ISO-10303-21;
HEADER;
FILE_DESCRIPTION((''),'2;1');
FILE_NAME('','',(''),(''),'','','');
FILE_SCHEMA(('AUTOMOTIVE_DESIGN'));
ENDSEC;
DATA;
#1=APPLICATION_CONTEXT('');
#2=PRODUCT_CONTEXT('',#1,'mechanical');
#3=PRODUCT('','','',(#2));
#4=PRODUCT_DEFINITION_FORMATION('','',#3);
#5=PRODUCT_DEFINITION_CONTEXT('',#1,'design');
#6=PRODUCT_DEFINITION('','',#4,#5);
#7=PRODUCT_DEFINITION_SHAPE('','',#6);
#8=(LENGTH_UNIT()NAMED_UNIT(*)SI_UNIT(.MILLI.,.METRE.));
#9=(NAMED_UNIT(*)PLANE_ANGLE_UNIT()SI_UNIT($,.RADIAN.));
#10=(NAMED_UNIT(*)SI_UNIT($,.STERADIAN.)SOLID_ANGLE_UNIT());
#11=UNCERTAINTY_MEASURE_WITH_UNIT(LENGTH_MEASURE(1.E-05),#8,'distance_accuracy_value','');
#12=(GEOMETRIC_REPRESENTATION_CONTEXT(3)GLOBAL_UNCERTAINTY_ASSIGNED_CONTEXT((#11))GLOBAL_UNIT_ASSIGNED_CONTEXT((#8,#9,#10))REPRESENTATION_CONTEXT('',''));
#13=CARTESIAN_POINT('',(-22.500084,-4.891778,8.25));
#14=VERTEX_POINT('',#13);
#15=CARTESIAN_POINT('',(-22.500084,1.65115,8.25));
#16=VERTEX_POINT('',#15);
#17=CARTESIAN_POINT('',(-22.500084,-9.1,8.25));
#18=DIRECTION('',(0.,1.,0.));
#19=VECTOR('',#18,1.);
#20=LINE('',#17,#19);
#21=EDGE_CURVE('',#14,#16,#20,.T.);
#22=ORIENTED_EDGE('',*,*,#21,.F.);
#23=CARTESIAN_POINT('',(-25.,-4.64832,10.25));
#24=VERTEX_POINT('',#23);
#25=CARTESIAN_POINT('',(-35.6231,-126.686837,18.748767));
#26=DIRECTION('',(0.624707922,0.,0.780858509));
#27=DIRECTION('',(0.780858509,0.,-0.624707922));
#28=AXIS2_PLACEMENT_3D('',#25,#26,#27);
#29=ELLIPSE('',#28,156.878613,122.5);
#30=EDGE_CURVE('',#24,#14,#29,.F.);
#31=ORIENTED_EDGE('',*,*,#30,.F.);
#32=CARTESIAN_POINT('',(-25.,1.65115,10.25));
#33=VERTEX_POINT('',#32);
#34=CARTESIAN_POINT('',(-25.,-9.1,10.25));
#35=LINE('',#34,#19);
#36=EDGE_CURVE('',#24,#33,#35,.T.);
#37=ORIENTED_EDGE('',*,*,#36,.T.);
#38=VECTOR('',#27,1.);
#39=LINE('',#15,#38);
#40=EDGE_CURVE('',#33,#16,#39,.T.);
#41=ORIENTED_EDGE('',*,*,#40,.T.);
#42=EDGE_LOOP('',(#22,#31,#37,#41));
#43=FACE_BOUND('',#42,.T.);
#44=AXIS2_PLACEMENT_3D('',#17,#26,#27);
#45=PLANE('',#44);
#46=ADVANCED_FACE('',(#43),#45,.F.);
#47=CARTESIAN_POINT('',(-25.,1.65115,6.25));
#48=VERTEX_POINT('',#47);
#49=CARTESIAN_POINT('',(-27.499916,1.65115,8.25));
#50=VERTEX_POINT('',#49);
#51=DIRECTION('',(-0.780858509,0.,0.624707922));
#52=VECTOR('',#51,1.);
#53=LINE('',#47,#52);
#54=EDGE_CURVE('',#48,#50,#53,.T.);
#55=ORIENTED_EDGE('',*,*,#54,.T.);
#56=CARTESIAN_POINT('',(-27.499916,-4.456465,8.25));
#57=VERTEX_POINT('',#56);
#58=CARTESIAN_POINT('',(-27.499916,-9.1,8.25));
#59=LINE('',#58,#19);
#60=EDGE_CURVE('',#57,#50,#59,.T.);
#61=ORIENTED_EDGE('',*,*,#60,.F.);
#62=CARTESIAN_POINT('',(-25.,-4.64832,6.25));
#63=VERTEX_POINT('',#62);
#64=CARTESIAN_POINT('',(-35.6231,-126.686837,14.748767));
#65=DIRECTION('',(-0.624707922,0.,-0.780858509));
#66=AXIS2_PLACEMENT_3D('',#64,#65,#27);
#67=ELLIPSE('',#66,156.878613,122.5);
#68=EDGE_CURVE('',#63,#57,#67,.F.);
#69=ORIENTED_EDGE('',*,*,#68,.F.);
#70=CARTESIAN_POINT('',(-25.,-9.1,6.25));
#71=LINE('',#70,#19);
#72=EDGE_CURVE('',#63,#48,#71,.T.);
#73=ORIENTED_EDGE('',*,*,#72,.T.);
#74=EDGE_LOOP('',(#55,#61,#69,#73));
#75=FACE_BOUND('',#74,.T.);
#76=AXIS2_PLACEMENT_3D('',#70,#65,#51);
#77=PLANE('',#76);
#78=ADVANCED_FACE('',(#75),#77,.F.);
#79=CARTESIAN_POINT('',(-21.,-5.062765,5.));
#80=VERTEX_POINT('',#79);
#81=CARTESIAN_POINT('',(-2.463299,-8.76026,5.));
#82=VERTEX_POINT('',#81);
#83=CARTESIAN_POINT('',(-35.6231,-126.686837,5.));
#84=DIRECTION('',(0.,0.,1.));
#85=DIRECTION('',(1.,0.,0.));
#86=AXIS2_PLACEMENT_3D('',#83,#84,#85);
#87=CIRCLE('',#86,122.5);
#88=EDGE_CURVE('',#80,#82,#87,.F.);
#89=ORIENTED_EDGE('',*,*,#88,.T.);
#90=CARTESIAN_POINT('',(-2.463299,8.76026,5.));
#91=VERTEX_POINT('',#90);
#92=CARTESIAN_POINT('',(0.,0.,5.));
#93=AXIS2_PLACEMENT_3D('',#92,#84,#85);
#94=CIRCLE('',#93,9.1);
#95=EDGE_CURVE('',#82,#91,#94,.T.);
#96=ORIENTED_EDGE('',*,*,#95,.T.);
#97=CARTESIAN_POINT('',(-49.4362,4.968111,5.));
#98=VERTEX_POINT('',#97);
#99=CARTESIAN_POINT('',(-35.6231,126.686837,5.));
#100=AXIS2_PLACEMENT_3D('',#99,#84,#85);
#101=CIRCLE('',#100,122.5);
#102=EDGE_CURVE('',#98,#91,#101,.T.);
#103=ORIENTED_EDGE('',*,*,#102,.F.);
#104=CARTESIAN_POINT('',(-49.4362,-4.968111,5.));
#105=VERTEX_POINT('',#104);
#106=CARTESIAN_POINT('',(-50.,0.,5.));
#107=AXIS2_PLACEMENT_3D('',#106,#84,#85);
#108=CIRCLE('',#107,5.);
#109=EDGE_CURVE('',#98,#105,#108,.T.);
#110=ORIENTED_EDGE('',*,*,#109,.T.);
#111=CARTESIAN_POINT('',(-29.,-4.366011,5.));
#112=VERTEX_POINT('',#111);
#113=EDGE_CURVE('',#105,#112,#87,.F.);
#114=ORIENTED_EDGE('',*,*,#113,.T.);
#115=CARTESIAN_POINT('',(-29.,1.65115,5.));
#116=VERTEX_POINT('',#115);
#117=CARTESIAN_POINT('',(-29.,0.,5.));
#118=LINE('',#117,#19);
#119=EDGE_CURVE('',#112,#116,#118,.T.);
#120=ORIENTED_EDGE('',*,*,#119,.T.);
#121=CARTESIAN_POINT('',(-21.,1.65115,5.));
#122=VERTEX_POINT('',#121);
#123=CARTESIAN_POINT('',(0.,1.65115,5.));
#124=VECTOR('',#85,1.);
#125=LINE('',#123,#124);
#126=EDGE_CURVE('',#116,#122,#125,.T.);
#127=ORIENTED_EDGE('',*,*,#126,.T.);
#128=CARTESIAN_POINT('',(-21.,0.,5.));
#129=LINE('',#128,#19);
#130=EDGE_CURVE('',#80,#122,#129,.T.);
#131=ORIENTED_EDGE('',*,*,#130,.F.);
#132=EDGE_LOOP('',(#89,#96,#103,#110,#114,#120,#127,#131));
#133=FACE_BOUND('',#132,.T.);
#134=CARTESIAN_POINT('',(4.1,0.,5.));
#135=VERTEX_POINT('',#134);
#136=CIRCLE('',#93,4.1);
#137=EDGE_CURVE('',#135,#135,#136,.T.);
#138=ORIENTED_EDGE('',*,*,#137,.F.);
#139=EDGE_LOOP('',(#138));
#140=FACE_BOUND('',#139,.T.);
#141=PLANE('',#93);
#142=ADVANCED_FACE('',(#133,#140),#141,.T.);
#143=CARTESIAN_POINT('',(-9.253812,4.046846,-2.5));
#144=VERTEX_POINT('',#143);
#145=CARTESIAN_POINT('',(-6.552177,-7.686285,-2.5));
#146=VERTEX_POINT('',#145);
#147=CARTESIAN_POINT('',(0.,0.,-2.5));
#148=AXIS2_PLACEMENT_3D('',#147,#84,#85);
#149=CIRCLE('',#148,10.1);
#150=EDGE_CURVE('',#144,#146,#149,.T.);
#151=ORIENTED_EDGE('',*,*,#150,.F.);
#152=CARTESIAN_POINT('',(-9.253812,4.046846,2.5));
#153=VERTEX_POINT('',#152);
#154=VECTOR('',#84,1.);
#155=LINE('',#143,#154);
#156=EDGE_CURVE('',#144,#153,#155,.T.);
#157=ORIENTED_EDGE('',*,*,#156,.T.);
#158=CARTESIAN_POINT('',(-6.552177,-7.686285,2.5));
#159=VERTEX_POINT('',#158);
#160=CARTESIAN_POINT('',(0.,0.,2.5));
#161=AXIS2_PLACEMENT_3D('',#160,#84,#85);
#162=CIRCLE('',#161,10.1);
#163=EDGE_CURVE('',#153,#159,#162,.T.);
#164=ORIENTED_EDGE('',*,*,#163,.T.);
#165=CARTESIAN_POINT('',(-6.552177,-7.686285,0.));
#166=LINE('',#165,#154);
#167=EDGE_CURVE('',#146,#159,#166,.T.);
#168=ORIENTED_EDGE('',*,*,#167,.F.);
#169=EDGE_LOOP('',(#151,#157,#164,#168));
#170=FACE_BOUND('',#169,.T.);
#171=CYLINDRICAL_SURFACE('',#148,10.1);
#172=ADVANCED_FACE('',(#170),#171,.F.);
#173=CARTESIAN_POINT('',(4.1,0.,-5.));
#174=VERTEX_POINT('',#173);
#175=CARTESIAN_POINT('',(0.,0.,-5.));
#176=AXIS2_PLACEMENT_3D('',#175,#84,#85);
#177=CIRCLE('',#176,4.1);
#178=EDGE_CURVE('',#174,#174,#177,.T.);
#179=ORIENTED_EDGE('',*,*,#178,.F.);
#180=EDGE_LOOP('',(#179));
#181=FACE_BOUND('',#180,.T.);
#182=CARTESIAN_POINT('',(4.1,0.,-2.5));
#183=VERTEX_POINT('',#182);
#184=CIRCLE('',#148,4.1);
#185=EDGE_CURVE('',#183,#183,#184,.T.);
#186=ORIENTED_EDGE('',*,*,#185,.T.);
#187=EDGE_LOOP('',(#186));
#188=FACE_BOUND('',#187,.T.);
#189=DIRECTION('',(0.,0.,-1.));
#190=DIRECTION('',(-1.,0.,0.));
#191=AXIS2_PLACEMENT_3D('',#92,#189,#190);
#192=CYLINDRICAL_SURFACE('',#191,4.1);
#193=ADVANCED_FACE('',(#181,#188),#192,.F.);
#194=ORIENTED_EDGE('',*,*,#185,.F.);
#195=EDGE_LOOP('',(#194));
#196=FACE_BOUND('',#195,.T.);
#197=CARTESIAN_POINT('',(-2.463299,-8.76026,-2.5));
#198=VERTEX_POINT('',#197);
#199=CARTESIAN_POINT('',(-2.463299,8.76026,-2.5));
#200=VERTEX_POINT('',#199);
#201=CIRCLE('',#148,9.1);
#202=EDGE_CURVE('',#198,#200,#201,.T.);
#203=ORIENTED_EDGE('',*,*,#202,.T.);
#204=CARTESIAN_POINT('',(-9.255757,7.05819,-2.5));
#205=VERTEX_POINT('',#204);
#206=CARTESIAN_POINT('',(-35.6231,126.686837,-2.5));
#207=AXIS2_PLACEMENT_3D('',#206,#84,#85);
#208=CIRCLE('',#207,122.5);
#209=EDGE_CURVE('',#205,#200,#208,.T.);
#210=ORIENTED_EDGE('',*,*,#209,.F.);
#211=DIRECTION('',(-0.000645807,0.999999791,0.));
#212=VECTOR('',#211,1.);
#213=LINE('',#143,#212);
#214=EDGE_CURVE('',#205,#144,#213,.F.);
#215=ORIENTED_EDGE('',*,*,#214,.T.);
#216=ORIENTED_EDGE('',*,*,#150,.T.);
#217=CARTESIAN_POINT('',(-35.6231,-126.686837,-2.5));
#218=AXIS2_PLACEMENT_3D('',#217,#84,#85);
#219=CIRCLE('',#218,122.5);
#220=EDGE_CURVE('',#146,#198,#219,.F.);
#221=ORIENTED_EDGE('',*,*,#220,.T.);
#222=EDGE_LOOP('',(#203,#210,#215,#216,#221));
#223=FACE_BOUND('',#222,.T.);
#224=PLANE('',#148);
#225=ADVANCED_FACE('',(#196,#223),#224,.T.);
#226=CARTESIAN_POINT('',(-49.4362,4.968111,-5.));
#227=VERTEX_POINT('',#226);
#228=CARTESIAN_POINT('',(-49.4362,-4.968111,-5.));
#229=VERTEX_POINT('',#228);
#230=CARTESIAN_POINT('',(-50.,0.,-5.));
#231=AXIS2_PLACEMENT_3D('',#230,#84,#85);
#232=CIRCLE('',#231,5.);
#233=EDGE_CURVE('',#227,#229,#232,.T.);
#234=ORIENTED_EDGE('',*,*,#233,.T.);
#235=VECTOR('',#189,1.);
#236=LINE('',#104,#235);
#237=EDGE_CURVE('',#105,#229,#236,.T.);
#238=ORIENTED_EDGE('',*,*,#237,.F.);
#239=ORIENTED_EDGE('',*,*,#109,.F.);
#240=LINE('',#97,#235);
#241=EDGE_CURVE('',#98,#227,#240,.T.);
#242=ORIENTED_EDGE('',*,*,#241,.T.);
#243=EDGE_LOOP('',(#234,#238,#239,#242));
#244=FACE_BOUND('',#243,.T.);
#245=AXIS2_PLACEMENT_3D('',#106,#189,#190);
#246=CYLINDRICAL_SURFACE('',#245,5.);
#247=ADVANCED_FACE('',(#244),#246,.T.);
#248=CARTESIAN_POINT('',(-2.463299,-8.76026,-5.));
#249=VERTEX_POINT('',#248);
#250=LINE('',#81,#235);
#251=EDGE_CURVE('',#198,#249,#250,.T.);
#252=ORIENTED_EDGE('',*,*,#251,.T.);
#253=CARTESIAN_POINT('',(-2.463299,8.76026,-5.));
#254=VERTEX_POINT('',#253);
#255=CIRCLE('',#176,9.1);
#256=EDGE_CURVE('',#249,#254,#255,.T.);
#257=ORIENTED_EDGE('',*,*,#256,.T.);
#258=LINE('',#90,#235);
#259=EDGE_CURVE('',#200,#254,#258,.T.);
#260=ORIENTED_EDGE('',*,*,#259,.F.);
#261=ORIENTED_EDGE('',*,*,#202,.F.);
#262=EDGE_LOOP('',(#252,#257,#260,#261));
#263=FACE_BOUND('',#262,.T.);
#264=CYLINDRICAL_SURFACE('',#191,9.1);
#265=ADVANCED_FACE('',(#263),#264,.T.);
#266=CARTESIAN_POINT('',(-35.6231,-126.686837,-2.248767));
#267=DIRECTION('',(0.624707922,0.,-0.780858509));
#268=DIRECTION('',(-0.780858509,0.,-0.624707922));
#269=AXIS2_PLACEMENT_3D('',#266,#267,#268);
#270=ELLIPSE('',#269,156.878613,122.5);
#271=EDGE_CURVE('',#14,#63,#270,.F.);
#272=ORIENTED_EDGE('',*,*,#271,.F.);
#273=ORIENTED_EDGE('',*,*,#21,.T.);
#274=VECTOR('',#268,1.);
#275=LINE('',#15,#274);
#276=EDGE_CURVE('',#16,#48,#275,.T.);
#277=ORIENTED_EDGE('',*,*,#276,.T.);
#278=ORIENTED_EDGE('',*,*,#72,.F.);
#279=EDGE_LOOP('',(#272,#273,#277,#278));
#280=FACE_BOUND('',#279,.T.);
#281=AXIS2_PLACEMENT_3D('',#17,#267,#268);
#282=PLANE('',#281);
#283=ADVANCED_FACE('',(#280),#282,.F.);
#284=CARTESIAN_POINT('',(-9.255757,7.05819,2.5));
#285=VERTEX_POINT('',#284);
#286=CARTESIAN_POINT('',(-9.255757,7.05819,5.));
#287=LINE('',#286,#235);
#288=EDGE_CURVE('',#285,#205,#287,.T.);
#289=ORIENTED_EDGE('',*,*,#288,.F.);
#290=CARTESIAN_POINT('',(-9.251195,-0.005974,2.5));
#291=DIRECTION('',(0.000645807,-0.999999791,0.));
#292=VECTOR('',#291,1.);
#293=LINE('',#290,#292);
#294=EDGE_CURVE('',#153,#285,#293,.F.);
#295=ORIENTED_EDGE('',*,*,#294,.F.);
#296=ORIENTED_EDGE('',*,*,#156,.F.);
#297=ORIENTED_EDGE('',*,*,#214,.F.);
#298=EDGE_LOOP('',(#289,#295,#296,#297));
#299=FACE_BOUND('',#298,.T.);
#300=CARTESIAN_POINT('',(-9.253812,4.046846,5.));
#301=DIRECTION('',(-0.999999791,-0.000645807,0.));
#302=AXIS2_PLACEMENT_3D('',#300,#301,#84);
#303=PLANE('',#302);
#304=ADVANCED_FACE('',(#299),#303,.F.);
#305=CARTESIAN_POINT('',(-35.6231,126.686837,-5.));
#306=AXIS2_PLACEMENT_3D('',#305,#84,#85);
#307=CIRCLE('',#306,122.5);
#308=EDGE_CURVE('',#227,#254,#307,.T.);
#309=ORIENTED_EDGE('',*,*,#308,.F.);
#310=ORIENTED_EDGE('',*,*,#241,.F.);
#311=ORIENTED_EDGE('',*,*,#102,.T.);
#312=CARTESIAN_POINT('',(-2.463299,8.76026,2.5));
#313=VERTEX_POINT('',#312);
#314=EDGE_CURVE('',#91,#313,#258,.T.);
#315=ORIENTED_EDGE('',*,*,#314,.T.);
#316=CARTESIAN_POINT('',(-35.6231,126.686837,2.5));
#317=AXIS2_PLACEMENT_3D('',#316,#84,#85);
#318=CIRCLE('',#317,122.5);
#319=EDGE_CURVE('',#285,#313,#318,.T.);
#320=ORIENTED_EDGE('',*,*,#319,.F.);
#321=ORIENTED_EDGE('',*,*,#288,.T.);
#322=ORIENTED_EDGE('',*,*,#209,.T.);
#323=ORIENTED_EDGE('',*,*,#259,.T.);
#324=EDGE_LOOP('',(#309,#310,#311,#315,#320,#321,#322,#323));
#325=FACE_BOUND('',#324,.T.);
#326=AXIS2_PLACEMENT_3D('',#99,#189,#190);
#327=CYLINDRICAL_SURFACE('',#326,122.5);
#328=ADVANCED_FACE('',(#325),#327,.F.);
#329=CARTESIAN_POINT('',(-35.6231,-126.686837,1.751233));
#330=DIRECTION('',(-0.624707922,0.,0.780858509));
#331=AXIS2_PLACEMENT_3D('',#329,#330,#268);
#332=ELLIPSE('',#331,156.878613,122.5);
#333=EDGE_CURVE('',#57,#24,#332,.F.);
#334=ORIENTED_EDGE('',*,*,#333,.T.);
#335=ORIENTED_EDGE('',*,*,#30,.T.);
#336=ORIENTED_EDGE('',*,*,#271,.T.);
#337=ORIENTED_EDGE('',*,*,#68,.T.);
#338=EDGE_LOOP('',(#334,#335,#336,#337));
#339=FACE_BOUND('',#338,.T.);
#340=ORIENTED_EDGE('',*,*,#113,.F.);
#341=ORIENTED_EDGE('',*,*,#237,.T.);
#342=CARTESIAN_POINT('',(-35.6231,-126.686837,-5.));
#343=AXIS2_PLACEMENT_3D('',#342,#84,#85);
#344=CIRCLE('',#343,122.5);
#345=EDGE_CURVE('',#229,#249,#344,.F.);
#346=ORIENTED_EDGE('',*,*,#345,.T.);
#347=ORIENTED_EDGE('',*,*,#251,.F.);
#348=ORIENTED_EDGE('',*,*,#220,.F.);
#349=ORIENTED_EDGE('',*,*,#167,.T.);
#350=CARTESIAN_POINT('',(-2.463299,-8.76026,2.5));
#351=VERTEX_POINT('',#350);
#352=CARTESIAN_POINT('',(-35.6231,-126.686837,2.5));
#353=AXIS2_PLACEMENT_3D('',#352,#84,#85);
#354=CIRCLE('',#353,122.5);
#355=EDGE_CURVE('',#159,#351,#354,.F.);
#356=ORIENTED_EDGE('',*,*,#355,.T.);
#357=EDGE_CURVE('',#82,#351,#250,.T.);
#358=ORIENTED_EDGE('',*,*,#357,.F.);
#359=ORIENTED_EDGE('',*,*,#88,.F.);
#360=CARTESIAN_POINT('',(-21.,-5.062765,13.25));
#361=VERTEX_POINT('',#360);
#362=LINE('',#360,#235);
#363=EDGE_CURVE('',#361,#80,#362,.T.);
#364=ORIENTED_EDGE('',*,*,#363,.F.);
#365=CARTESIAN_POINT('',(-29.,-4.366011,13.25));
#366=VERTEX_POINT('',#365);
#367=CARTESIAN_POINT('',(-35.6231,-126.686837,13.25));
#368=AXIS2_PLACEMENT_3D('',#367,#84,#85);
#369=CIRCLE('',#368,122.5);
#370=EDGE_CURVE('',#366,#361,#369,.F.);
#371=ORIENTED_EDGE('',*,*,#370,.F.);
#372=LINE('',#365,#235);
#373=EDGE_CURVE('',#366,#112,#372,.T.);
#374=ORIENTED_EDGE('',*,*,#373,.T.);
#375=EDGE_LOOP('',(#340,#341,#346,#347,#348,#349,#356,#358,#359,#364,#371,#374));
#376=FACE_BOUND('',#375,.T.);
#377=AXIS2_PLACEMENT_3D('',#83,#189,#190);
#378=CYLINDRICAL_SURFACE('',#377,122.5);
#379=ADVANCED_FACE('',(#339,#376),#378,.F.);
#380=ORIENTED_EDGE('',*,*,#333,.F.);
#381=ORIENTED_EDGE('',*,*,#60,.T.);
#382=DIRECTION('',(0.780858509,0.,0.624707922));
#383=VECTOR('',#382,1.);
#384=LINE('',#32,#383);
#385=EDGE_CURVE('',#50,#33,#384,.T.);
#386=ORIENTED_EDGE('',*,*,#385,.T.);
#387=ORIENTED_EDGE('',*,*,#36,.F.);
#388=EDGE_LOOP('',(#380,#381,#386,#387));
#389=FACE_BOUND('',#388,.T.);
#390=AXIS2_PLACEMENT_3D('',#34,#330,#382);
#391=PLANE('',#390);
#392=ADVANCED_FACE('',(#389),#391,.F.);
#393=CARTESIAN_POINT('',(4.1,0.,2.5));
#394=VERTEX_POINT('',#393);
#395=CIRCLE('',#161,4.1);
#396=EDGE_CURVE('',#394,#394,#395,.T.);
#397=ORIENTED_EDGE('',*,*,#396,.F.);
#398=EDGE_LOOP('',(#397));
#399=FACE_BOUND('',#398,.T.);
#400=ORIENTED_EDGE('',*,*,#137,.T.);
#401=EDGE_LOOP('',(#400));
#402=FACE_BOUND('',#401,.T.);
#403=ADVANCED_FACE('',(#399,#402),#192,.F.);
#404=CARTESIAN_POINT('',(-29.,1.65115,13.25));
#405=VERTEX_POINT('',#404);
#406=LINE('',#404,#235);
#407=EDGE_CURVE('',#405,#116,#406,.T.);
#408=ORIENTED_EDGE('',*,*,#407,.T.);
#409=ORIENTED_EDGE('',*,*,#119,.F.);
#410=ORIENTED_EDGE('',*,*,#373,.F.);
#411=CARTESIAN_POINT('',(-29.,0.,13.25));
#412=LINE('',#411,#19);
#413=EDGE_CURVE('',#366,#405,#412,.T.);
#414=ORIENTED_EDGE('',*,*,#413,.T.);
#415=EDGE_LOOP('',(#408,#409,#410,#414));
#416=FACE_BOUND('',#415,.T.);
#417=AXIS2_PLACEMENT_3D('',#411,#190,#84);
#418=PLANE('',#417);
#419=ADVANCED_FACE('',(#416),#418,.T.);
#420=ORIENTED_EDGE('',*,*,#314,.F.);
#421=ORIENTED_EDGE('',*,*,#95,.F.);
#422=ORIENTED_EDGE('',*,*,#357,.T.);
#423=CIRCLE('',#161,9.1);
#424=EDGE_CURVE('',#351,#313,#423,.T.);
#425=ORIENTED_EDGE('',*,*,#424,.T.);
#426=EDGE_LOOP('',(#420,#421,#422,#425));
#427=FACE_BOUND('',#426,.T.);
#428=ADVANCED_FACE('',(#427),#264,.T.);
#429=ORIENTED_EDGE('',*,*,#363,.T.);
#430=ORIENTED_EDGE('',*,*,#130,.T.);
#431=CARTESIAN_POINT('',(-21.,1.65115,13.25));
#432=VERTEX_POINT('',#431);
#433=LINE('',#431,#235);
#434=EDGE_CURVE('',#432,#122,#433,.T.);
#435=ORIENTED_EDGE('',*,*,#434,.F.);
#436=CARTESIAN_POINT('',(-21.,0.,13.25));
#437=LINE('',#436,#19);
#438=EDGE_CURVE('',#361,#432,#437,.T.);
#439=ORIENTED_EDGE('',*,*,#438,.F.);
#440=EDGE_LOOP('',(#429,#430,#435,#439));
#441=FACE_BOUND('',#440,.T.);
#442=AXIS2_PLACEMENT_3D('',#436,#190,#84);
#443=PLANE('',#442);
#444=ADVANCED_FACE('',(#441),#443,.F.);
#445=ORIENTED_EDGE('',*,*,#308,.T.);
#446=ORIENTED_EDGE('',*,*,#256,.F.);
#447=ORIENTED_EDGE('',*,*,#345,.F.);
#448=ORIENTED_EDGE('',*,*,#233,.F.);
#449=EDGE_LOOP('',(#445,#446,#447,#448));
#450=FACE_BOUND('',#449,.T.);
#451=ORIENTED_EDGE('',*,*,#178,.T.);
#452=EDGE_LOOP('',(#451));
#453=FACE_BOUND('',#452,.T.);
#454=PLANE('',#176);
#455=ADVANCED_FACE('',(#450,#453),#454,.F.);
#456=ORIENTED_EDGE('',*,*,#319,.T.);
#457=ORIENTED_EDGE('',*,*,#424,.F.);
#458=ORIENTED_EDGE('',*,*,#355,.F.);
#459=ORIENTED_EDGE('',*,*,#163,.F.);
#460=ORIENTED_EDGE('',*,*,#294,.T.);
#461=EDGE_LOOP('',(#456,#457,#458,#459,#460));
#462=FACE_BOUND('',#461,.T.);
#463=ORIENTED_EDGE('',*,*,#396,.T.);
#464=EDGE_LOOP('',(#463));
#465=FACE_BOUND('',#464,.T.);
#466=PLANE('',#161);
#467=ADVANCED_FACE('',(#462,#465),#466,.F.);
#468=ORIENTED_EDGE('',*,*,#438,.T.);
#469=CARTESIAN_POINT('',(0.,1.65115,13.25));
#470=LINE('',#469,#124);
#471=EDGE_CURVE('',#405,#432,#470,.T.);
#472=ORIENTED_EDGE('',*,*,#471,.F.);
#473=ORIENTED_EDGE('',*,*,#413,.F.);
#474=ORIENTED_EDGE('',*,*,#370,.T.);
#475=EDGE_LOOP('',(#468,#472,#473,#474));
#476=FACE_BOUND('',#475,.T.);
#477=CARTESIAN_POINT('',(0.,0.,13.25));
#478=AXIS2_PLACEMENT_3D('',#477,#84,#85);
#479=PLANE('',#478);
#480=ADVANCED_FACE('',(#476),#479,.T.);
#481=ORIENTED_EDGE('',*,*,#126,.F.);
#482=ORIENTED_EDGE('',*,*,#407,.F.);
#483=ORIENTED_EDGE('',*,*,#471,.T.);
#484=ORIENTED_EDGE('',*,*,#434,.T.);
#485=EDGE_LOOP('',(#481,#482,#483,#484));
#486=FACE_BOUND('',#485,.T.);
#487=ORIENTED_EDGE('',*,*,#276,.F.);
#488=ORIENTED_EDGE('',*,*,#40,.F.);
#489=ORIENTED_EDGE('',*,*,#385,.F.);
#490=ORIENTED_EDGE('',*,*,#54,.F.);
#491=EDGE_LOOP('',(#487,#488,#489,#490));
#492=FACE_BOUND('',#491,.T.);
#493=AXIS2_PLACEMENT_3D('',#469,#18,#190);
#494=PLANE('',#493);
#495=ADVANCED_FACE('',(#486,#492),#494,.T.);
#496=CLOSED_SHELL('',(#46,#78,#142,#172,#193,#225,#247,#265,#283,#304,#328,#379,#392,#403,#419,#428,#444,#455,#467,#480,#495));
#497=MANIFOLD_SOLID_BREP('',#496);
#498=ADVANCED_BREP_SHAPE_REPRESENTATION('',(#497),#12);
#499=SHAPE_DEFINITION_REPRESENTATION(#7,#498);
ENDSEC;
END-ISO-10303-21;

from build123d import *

# Parameters (mm, degrees)
ESQUISSE1_R             = 4.1
BOSS_EXTRU_1_DEPTH      = 5
ESQUISSE2_R             = 10.1
ENL_V_MAT_EXTRU_1_DEPTH = 2.5
BOSS_EXTRU_2_START      = 8.25
BOSS_EXTRU_2_DEPTH      = 8.25
ENL_V_MAT_EXTRU_2_DEPTH = 58.586020219
CHANFREIN1_START        = -2.5
CHANFREIN1_DEPTH        = 5


with BuildPart() as part:
    # Esquisse1 → Boss.-Extru.1 (new, symmetric)
    with BuildSketch(Plane(origin=(0, 0, 0), x_dir=(0, 1, 0), z_dir=(0, 0, 1))):
        with BuildLine():
            ThreePointArc((-8.760260026, 2.463299468), (0, -9.1), (8.760260026, 2.463299468))
            ThreePointArc((8.760260026, 2.463299468), (4.584088783, 25.765676228), (4.968111267, 49.4362))
            ThreePointArc((4.968111267, 49.4362), (0, 55), (-4.968111267, 49.4362))
            ThreePointArc((-4.968111267, 49.4362), (-4.584088783, 25.765676228), (-8.760260026, 2.463299468))
        make_face()
        with Locations(Location((0, 0, 0), (0, 0, 270))):
            Circle(ESQUISSE1_R, mode=Mode.SUBTRACT)
    extrude(amount=BOSS_EXTRU_1_DEPTH, both=True)

    # Esquisse2 → Enlèv. mat.-Extru.1 (cut, symmetric)
    with BuildSketch(Plane(origin=(0, 0, 0), x_dir=(0, 1, 0), z_dir=(0, 0, 1))):
        Circle(ESQUISSE2_R)
    extrude(amount=ENL_V_MAT_EXTRU_1_DEPTH, both=True, mode=Mode.SUBTRACT)

    # Esquisse3 → Boss.-Extru.2 (add)
    with BuildSketch(Plane.XY.offset(5).offset(BOSS_EXTRU_2_START)):
        with BuildLine():
            Line((-29, 1.651149925), (-29, -4.366011007))
            ThreePointArc((-29, -4.366011007), (-24.994289146, -4.648817083), (-21, -5.062765073))
            Line((-21, -5.062765073), (-21, 1.651149925))
            Line((-21, 1.651149925), (-29, 1.651149925))
        make_face()
    extrude(amount=-BOSS_EXTRU_2_DEPTH)

    # Esquisse4 → Enlèv. mat.-Extru.2 (cut, through all)
    with BuildSketch(Plane(origin=(0, 1.651149925, 0), x_dir=(-1, 0, 0), z_dir=(0, 1, 0))):
        Polygon((22.500084499, 8.25), (25, 10.25), (27.499915501, 8.25), (25, 6.25), align=None)
    extrude(amount=-ENL_V_MAT_EXTRU_2_DEPTH, mode=Mode.SUBTRACT)

    # Chanfrein1: read off the stored shape, not the designer's step
    # Chanfrein1 outline → Chanfrein1 (cut)
    with BuildSketch(Plane.XY.offset(CHANFREIN1_START)):
        with BuildLine():
            ThreePointArc((-6.552176852, 7.68628509), (-7.902187824, 7.364580252), (-9.255756722, 7.058190199))
            Line((-9.255756722, 7.058190199), (-9.253811974, 4.046846174))
            ThreePointArc((-9.253811974, 4.046846174), (-8.109790355, 6.020074784), (-6.552176852, 7.68628509))
        make_face()
    extrude(amount=CHANFREIN1_DEPTH, mode=Mode.SUBTRACT)


solid = part.part
